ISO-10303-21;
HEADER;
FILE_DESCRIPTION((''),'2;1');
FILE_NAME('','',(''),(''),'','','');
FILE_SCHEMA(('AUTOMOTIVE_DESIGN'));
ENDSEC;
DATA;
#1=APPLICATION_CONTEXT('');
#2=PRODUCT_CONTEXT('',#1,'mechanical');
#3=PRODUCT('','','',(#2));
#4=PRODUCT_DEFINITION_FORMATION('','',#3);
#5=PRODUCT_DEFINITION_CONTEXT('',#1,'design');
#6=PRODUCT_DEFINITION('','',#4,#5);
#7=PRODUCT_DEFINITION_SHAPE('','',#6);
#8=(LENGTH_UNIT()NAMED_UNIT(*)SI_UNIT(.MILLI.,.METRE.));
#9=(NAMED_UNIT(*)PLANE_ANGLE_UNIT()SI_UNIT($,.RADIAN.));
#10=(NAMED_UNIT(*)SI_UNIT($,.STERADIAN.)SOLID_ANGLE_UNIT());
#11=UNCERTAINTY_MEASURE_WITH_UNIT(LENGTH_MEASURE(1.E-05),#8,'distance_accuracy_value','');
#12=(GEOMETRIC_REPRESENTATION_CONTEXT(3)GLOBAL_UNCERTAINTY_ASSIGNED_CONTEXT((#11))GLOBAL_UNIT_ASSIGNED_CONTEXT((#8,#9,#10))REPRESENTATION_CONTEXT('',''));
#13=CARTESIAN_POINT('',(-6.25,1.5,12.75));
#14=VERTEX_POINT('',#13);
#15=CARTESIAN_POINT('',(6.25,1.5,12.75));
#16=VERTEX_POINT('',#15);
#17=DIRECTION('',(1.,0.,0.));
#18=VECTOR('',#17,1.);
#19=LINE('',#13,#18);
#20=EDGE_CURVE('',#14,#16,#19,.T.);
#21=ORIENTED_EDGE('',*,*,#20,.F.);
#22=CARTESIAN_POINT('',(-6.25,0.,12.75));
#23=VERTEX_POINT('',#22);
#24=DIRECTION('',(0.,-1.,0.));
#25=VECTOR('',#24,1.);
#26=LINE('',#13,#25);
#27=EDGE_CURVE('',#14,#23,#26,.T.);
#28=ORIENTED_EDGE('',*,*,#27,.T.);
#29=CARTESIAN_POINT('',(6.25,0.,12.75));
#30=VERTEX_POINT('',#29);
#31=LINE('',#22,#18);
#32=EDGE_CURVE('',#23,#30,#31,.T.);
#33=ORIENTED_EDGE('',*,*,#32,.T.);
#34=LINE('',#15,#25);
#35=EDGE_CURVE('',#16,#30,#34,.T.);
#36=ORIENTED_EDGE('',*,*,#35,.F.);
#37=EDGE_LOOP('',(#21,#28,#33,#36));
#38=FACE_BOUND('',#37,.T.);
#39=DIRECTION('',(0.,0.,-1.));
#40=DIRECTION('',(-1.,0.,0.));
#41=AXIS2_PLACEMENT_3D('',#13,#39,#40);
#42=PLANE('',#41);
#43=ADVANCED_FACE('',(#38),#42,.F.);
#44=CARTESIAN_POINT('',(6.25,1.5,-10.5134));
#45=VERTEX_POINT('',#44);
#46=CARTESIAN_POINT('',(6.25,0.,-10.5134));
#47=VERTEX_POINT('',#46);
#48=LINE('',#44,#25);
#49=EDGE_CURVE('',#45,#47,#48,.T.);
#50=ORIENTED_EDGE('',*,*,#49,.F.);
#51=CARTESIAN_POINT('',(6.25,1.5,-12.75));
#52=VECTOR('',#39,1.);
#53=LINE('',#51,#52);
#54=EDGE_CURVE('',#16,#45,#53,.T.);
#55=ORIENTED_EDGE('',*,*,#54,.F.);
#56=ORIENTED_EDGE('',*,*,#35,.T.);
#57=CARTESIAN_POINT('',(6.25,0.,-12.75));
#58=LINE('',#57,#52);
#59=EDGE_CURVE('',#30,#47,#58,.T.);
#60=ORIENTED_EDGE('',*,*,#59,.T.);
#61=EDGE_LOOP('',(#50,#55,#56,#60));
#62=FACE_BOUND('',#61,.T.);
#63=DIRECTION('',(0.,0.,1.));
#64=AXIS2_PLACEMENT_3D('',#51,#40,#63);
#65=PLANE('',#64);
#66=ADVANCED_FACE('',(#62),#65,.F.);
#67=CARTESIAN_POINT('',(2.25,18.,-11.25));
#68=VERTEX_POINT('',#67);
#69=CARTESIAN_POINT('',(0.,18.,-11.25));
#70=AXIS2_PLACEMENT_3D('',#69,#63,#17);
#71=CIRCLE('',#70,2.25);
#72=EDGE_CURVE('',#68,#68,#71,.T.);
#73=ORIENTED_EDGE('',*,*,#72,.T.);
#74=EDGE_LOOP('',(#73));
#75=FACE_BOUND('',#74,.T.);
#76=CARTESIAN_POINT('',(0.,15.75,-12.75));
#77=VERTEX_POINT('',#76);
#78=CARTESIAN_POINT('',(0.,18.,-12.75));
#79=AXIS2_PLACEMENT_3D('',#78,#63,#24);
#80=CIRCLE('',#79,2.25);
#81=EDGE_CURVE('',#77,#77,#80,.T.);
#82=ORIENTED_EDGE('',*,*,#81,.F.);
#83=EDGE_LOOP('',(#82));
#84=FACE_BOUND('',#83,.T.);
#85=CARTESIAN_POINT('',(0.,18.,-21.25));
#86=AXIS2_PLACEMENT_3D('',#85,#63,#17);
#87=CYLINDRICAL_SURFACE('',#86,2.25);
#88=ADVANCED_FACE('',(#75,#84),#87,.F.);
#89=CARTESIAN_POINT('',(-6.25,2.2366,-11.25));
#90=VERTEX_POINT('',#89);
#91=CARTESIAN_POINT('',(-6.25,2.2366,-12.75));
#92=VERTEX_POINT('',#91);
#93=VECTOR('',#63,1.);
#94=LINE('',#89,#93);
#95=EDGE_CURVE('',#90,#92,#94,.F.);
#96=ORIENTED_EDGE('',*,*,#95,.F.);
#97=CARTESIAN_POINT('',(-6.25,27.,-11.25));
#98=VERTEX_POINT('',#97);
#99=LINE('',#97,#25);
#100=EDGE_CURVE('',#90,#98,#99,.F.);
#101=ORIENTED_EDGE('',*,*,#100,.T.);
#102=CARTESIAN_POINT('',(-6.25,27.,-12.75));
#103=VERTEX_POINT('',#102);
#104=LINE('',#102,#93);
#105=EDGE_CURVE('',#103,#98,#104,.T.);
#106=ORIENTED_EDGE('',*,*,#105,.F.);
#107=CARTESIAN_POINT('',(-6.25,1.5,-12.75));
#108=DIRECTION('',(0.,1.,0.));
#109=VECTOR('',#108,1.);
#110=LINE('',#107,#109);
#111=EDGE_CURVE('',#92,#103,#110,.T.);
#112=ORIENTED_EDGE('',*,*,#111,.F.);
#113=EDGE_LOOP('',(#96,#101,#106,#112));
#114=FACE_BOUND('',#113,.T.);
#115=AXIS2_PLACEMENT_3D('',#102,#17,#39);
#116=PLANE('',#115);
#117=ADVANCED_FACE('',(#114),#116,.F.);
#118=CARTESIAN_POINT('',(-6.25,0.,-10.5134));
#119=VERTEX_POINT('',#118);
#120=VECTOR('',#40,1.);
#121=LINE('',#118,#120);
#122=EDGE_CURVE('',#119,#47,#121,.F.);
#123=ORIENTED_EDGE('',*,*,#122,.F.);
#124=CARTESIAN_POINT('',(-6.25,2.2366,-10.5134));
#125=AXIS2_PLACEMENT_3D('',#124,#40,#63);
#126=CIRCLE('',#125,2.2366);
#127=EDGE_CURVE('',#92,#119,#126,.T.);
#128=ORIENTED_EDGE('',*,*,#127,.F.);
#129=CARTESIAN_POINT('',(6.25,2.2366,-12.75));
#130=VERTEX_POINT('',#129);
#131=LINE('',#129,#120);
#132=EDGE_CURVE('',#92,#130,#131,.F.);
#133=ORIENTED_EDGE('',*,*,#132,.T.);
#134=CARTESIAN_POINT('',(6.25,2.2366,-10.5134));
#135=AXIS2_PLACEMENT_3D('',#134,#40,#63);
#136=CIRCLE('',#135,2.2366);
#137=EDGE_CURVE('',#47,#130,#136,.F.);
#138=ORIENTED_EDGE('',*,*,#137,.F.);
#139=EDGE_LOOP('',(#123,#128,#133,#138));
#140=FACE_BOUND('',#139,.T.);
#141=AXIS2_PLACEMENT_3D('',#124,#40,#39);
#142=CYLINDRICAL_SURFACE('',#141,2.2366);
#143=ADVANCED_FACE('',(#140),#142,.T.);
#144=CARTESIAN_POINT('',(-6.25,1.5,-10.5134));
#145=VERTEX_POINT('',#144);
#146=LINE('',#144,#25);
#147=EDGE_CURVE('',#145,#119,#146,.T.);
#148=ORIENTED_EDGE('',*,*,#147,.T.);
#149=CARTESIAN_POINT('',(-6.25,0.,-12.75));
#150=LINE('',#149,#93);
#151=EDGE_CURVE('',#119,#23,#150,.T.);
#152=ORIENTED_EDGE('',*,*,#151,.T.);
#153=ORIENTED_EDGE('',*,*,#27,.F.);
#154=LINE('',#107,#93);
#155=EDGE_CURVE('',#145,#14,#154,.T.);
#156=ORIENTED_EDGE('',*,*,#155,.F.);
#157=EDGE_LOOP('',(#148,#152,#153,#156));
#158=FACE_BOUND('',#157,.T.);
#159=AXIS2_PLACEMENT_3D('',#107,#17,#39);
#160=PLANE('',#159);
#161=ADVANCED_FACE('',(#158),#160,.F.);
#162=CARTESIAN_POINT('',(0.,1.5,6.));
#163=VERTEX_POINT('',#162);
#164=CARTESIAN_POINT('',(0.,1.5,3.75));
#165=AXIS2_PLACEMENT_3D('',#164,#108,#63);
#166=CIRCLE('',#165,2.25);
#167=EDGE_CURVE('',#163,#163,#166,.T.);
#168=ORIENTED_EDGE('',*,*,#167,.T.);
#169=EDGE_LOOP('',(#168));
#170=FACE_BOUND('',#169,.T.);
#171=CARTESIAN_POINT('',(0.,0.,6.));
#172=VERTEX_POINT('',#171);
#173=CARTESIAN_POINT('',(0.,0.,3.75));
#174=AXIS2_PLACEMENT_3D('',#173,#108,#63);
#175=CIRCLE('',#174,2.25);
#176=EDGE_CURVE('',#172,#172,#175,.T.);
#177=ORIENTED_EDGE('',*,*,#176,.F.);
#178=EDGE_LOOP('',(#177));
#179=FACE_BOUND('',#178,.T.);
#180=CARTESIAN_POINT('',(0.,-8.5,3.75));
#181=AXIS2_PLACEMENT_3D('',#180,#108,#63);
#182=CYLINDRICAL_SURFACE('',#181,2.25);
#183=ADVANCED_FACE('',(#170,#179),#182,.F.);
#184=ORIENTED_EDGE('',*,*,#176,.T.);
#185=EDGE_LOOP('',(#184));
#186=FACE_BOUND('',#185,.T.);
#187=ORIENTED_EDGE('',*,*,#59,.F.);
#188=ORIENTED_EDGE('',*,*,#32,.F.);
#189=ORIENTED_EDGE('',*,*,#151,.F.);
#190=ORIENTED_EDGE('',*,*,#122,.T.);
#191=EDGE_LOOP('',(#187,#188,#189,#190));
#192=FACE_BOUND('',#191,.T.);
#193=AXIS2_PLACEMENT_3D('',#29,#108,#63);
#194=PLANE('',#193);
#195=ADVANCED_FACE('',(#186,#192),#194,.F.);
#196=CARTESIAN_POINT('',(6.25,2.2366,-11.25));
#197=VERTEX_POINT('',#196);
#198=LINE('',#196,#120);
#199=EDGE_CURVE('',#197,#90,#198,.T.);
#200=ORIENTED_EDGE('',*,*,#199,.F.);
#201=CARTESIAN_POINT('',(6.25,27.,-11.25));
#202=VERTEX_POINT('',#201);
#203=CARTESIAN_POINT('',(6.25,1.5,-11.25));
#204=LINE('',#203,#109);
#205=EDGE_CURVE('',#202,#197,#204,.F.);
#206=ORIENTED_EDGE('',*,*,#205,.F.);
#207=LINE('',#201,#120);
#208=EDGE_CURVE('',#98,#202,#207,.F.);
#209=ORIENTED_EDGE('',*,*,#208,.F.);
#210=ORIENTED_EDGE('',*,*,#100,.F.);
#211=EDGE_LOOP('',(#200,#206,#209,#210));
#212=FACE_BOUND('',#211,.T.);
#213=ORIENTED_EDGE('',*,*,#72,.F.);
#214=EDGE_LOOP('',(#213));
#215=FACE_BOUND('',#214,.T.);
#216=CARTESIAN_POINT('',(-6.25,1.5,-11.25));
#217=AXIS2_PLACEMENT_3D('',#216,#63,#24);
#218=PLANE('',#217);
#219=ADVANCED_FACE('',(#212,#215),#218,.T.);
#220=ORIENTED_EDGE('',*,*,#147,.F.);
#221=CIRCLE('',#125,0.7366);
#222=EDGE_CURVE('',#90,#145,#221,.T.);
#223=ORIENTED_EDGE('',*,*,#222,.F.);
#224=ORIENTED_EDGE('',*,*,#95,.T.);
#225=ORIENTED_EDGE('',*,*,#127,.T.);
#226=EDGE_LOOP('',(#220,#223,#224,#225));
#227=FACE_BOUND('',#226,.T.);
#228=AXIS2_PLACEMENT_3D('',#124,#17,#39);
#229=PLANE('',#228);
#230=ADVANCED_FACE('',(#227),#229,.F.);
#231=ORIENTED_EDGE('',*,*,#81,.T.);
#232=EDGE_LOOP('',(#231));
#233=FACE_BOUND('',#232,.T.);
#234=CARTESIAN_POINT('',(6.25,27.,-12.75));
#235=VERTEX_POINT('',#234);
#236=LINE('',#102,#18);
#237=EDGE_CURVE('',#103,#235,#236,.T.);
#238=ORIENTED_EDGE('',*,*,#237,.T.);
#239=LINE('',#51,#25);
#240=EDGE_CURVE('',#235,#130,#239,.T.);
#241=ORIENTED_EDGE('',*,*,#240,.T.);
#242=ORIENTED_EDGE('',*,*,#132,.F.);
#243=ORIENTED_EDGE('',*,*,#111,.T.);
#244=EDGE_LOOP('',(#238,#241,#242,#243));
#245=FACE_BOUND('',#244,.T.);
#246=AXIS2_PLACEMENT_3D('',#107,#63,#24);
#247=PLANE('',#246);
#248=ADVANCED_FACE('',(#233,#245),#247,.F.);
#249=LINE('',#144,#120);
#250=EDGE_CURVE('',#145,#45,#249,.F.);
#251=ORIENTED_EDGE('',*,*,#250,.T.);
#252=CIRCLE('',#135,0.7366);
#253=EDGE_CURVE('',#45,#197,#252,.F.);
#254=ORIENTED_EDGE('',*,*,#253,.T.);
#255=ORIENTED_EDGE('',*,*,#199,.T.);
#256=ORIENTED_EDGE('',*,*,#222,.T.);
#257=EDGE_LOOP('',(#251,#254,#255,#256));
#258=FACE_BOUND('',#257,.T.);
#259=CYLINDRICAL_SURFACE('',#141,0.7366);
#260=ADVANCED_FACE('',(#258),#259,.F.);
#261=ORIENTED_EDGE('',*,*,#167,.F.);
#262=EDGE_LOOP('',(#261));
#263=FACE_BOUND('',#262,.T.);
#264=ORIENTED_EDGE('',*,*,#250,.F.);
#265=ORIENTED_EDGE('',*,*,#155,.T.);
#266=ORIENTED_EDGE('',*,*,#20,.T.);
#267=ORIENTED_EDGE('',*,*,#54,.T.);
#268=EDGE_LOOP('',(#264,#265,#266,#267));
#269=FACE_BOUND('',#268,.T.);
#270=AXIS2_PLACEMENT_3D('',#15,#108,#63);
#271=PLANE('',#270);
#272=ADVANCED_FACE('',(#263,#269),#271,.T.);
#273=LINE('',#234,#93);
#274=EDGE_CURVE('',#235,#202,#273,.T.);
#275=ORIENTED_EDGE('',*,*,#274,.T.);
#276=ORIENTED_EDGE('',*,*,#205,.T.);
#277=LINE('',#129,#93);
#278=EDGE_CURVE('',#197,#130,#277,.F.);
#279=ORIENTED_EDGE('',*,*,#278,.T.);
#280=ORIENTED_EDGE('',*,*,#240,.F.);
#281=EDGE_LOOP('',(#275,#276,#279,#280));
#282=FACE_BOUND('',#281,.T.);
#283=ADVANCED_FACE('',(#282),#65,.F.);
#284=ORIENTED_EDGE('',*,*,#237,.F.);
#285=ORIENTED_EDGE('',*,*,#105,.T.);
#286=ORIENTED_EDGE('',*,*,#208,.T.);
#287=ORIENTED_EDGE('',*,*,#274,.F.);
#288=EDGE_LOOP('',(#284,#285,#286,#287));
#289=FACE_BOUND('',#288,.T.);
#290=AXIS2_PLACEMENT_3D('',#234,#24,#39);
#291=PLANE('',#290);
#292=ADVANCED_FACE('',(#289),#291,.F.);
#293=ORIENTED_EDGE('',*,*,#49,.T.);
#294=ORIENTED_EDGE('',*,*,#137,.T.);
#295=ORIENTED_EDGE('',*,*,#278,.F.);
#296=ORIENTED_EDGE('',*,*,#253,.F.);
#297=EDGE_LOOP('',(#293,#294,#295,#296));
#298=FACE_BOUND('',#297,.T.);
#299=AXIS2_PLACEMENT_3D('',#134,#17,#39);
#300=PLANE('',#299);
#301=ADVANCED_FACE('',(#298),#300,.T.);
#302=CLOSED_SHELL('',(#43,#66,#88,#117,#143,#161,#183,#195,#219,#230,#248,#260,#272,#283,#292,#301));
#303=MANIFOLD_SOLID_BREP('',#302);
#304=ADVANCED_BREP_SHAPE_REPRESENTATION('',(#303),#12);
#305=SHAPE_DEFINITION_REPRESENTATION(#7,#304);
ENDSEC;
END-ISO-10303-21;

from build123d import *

# Parameters (mm, degrees)
SKETCH_1_W                       = 12.5
SKETCH_1_H                       = 25.5
SM_BASE_FLANGE_1_DEPTH           = 1.5
SM_EDGE_FLANGE_1_STRIP_W         = 7.4732
SM_EDGE_FLANGE_1_STRIP_H         = 1.5
SM_EDGE_FLANGE_1_STRIP_CUT_DEPTH = 12.5
SM_EDGE_FLANGE_1_DEPTH           = 12.5
SKETCH_6_R                       = 2.25
CUT_EXTRUDE_1_DEPTH              = 10
SKETCH_7_R                       = 2.25
CUT_EXTRUDE_2_DEPTH              = 10


# Sheet-metal steps are written as plain solids
with BuildPart() as part:
    # Sketch 1 → 基材-凸緣1 (new body)
    with BuildSketch(Plane(origin=(0, 0, 0), x_dir=(1, 0, 0), z_dir=(0, 1, 0))):
        Rectangle(SKETCH_1_W, SKETCH_1_H)
    extrude(amount=SM_BASE_FLANGE_1_DEPTH)

    # 邊線-凸緣1 strip (across the edge) → 邊線-凸緣1 strip cut (cut)
    with BuildSketch(Plane(origin=(6.25, 1.5, -12.75), x_dir=(0, 0, 1), z_dir=(-1, 0, 0))):
        with Locations((-1.5, -0.75)):
            Rectangle(SM_EDGE_FLANGE_1_STRIP_W, SM_EDGE_FLANGE_1_STRIP_H)
    extrude(amount=SM_EDGE_FLANGE_1_STRIP_CUT_DEPTH, mode=Mode.SUBTRACT)

    # 邊線-凸緣1 section (across the edge) → 邊線-凸緣1 (add)
    with BuildSketch(Plane(origin=(6.25, 1.5, -12.75), x_dir=(0, 0, 1), z_dir=(-1, 0, 0))):
        with BuildLine():
            Line((0, 0.7366), (0, 25.5))
            Line((0, 25.5), (1.5, 25.5))
            Line((1.5, 25.5), (1.5, 0.7366))
            ThreePointArc((1.5, 0.7366), (1.715745145, 0.215745145), (2.2366, 0))
            Line((2.2366, 0), (2.2366, -1.5))
            ThreePointArc((2.2366, -1.5), (0.655084973, -0.844915027), (0, 0.7366))
        make_face()
    extrude(amount=SM_EDGE_FLANGE_1_DEPTH)

    # 草圖6 → 伸長1 (cut)
    with BuildSketch(Plane(origin=(0, 1.5, 0), x_dir=(1, 0, 0), z_dir=(0, 1, 0))):
        with Locations(Location((0, -3.75, 0), (0, 0, 270))):
            Circle(SKETCH_6_R)
    extrude(amount=-CUT_EXTRUDE_1_DEPTH, mode=Mode.SUBTRACT)

    # 草圖7 → 伸長2 (cut)
    with BuildSketch(Plane.XY.offset(-11.25)):
        with Locations((0, 18)):
            Circle(SKETCH_7_R)
    extrude(amount=-CUT_EXTRUDE_2_DEPTH, mode=Mode.SUBTRACT)


solid = part.part
